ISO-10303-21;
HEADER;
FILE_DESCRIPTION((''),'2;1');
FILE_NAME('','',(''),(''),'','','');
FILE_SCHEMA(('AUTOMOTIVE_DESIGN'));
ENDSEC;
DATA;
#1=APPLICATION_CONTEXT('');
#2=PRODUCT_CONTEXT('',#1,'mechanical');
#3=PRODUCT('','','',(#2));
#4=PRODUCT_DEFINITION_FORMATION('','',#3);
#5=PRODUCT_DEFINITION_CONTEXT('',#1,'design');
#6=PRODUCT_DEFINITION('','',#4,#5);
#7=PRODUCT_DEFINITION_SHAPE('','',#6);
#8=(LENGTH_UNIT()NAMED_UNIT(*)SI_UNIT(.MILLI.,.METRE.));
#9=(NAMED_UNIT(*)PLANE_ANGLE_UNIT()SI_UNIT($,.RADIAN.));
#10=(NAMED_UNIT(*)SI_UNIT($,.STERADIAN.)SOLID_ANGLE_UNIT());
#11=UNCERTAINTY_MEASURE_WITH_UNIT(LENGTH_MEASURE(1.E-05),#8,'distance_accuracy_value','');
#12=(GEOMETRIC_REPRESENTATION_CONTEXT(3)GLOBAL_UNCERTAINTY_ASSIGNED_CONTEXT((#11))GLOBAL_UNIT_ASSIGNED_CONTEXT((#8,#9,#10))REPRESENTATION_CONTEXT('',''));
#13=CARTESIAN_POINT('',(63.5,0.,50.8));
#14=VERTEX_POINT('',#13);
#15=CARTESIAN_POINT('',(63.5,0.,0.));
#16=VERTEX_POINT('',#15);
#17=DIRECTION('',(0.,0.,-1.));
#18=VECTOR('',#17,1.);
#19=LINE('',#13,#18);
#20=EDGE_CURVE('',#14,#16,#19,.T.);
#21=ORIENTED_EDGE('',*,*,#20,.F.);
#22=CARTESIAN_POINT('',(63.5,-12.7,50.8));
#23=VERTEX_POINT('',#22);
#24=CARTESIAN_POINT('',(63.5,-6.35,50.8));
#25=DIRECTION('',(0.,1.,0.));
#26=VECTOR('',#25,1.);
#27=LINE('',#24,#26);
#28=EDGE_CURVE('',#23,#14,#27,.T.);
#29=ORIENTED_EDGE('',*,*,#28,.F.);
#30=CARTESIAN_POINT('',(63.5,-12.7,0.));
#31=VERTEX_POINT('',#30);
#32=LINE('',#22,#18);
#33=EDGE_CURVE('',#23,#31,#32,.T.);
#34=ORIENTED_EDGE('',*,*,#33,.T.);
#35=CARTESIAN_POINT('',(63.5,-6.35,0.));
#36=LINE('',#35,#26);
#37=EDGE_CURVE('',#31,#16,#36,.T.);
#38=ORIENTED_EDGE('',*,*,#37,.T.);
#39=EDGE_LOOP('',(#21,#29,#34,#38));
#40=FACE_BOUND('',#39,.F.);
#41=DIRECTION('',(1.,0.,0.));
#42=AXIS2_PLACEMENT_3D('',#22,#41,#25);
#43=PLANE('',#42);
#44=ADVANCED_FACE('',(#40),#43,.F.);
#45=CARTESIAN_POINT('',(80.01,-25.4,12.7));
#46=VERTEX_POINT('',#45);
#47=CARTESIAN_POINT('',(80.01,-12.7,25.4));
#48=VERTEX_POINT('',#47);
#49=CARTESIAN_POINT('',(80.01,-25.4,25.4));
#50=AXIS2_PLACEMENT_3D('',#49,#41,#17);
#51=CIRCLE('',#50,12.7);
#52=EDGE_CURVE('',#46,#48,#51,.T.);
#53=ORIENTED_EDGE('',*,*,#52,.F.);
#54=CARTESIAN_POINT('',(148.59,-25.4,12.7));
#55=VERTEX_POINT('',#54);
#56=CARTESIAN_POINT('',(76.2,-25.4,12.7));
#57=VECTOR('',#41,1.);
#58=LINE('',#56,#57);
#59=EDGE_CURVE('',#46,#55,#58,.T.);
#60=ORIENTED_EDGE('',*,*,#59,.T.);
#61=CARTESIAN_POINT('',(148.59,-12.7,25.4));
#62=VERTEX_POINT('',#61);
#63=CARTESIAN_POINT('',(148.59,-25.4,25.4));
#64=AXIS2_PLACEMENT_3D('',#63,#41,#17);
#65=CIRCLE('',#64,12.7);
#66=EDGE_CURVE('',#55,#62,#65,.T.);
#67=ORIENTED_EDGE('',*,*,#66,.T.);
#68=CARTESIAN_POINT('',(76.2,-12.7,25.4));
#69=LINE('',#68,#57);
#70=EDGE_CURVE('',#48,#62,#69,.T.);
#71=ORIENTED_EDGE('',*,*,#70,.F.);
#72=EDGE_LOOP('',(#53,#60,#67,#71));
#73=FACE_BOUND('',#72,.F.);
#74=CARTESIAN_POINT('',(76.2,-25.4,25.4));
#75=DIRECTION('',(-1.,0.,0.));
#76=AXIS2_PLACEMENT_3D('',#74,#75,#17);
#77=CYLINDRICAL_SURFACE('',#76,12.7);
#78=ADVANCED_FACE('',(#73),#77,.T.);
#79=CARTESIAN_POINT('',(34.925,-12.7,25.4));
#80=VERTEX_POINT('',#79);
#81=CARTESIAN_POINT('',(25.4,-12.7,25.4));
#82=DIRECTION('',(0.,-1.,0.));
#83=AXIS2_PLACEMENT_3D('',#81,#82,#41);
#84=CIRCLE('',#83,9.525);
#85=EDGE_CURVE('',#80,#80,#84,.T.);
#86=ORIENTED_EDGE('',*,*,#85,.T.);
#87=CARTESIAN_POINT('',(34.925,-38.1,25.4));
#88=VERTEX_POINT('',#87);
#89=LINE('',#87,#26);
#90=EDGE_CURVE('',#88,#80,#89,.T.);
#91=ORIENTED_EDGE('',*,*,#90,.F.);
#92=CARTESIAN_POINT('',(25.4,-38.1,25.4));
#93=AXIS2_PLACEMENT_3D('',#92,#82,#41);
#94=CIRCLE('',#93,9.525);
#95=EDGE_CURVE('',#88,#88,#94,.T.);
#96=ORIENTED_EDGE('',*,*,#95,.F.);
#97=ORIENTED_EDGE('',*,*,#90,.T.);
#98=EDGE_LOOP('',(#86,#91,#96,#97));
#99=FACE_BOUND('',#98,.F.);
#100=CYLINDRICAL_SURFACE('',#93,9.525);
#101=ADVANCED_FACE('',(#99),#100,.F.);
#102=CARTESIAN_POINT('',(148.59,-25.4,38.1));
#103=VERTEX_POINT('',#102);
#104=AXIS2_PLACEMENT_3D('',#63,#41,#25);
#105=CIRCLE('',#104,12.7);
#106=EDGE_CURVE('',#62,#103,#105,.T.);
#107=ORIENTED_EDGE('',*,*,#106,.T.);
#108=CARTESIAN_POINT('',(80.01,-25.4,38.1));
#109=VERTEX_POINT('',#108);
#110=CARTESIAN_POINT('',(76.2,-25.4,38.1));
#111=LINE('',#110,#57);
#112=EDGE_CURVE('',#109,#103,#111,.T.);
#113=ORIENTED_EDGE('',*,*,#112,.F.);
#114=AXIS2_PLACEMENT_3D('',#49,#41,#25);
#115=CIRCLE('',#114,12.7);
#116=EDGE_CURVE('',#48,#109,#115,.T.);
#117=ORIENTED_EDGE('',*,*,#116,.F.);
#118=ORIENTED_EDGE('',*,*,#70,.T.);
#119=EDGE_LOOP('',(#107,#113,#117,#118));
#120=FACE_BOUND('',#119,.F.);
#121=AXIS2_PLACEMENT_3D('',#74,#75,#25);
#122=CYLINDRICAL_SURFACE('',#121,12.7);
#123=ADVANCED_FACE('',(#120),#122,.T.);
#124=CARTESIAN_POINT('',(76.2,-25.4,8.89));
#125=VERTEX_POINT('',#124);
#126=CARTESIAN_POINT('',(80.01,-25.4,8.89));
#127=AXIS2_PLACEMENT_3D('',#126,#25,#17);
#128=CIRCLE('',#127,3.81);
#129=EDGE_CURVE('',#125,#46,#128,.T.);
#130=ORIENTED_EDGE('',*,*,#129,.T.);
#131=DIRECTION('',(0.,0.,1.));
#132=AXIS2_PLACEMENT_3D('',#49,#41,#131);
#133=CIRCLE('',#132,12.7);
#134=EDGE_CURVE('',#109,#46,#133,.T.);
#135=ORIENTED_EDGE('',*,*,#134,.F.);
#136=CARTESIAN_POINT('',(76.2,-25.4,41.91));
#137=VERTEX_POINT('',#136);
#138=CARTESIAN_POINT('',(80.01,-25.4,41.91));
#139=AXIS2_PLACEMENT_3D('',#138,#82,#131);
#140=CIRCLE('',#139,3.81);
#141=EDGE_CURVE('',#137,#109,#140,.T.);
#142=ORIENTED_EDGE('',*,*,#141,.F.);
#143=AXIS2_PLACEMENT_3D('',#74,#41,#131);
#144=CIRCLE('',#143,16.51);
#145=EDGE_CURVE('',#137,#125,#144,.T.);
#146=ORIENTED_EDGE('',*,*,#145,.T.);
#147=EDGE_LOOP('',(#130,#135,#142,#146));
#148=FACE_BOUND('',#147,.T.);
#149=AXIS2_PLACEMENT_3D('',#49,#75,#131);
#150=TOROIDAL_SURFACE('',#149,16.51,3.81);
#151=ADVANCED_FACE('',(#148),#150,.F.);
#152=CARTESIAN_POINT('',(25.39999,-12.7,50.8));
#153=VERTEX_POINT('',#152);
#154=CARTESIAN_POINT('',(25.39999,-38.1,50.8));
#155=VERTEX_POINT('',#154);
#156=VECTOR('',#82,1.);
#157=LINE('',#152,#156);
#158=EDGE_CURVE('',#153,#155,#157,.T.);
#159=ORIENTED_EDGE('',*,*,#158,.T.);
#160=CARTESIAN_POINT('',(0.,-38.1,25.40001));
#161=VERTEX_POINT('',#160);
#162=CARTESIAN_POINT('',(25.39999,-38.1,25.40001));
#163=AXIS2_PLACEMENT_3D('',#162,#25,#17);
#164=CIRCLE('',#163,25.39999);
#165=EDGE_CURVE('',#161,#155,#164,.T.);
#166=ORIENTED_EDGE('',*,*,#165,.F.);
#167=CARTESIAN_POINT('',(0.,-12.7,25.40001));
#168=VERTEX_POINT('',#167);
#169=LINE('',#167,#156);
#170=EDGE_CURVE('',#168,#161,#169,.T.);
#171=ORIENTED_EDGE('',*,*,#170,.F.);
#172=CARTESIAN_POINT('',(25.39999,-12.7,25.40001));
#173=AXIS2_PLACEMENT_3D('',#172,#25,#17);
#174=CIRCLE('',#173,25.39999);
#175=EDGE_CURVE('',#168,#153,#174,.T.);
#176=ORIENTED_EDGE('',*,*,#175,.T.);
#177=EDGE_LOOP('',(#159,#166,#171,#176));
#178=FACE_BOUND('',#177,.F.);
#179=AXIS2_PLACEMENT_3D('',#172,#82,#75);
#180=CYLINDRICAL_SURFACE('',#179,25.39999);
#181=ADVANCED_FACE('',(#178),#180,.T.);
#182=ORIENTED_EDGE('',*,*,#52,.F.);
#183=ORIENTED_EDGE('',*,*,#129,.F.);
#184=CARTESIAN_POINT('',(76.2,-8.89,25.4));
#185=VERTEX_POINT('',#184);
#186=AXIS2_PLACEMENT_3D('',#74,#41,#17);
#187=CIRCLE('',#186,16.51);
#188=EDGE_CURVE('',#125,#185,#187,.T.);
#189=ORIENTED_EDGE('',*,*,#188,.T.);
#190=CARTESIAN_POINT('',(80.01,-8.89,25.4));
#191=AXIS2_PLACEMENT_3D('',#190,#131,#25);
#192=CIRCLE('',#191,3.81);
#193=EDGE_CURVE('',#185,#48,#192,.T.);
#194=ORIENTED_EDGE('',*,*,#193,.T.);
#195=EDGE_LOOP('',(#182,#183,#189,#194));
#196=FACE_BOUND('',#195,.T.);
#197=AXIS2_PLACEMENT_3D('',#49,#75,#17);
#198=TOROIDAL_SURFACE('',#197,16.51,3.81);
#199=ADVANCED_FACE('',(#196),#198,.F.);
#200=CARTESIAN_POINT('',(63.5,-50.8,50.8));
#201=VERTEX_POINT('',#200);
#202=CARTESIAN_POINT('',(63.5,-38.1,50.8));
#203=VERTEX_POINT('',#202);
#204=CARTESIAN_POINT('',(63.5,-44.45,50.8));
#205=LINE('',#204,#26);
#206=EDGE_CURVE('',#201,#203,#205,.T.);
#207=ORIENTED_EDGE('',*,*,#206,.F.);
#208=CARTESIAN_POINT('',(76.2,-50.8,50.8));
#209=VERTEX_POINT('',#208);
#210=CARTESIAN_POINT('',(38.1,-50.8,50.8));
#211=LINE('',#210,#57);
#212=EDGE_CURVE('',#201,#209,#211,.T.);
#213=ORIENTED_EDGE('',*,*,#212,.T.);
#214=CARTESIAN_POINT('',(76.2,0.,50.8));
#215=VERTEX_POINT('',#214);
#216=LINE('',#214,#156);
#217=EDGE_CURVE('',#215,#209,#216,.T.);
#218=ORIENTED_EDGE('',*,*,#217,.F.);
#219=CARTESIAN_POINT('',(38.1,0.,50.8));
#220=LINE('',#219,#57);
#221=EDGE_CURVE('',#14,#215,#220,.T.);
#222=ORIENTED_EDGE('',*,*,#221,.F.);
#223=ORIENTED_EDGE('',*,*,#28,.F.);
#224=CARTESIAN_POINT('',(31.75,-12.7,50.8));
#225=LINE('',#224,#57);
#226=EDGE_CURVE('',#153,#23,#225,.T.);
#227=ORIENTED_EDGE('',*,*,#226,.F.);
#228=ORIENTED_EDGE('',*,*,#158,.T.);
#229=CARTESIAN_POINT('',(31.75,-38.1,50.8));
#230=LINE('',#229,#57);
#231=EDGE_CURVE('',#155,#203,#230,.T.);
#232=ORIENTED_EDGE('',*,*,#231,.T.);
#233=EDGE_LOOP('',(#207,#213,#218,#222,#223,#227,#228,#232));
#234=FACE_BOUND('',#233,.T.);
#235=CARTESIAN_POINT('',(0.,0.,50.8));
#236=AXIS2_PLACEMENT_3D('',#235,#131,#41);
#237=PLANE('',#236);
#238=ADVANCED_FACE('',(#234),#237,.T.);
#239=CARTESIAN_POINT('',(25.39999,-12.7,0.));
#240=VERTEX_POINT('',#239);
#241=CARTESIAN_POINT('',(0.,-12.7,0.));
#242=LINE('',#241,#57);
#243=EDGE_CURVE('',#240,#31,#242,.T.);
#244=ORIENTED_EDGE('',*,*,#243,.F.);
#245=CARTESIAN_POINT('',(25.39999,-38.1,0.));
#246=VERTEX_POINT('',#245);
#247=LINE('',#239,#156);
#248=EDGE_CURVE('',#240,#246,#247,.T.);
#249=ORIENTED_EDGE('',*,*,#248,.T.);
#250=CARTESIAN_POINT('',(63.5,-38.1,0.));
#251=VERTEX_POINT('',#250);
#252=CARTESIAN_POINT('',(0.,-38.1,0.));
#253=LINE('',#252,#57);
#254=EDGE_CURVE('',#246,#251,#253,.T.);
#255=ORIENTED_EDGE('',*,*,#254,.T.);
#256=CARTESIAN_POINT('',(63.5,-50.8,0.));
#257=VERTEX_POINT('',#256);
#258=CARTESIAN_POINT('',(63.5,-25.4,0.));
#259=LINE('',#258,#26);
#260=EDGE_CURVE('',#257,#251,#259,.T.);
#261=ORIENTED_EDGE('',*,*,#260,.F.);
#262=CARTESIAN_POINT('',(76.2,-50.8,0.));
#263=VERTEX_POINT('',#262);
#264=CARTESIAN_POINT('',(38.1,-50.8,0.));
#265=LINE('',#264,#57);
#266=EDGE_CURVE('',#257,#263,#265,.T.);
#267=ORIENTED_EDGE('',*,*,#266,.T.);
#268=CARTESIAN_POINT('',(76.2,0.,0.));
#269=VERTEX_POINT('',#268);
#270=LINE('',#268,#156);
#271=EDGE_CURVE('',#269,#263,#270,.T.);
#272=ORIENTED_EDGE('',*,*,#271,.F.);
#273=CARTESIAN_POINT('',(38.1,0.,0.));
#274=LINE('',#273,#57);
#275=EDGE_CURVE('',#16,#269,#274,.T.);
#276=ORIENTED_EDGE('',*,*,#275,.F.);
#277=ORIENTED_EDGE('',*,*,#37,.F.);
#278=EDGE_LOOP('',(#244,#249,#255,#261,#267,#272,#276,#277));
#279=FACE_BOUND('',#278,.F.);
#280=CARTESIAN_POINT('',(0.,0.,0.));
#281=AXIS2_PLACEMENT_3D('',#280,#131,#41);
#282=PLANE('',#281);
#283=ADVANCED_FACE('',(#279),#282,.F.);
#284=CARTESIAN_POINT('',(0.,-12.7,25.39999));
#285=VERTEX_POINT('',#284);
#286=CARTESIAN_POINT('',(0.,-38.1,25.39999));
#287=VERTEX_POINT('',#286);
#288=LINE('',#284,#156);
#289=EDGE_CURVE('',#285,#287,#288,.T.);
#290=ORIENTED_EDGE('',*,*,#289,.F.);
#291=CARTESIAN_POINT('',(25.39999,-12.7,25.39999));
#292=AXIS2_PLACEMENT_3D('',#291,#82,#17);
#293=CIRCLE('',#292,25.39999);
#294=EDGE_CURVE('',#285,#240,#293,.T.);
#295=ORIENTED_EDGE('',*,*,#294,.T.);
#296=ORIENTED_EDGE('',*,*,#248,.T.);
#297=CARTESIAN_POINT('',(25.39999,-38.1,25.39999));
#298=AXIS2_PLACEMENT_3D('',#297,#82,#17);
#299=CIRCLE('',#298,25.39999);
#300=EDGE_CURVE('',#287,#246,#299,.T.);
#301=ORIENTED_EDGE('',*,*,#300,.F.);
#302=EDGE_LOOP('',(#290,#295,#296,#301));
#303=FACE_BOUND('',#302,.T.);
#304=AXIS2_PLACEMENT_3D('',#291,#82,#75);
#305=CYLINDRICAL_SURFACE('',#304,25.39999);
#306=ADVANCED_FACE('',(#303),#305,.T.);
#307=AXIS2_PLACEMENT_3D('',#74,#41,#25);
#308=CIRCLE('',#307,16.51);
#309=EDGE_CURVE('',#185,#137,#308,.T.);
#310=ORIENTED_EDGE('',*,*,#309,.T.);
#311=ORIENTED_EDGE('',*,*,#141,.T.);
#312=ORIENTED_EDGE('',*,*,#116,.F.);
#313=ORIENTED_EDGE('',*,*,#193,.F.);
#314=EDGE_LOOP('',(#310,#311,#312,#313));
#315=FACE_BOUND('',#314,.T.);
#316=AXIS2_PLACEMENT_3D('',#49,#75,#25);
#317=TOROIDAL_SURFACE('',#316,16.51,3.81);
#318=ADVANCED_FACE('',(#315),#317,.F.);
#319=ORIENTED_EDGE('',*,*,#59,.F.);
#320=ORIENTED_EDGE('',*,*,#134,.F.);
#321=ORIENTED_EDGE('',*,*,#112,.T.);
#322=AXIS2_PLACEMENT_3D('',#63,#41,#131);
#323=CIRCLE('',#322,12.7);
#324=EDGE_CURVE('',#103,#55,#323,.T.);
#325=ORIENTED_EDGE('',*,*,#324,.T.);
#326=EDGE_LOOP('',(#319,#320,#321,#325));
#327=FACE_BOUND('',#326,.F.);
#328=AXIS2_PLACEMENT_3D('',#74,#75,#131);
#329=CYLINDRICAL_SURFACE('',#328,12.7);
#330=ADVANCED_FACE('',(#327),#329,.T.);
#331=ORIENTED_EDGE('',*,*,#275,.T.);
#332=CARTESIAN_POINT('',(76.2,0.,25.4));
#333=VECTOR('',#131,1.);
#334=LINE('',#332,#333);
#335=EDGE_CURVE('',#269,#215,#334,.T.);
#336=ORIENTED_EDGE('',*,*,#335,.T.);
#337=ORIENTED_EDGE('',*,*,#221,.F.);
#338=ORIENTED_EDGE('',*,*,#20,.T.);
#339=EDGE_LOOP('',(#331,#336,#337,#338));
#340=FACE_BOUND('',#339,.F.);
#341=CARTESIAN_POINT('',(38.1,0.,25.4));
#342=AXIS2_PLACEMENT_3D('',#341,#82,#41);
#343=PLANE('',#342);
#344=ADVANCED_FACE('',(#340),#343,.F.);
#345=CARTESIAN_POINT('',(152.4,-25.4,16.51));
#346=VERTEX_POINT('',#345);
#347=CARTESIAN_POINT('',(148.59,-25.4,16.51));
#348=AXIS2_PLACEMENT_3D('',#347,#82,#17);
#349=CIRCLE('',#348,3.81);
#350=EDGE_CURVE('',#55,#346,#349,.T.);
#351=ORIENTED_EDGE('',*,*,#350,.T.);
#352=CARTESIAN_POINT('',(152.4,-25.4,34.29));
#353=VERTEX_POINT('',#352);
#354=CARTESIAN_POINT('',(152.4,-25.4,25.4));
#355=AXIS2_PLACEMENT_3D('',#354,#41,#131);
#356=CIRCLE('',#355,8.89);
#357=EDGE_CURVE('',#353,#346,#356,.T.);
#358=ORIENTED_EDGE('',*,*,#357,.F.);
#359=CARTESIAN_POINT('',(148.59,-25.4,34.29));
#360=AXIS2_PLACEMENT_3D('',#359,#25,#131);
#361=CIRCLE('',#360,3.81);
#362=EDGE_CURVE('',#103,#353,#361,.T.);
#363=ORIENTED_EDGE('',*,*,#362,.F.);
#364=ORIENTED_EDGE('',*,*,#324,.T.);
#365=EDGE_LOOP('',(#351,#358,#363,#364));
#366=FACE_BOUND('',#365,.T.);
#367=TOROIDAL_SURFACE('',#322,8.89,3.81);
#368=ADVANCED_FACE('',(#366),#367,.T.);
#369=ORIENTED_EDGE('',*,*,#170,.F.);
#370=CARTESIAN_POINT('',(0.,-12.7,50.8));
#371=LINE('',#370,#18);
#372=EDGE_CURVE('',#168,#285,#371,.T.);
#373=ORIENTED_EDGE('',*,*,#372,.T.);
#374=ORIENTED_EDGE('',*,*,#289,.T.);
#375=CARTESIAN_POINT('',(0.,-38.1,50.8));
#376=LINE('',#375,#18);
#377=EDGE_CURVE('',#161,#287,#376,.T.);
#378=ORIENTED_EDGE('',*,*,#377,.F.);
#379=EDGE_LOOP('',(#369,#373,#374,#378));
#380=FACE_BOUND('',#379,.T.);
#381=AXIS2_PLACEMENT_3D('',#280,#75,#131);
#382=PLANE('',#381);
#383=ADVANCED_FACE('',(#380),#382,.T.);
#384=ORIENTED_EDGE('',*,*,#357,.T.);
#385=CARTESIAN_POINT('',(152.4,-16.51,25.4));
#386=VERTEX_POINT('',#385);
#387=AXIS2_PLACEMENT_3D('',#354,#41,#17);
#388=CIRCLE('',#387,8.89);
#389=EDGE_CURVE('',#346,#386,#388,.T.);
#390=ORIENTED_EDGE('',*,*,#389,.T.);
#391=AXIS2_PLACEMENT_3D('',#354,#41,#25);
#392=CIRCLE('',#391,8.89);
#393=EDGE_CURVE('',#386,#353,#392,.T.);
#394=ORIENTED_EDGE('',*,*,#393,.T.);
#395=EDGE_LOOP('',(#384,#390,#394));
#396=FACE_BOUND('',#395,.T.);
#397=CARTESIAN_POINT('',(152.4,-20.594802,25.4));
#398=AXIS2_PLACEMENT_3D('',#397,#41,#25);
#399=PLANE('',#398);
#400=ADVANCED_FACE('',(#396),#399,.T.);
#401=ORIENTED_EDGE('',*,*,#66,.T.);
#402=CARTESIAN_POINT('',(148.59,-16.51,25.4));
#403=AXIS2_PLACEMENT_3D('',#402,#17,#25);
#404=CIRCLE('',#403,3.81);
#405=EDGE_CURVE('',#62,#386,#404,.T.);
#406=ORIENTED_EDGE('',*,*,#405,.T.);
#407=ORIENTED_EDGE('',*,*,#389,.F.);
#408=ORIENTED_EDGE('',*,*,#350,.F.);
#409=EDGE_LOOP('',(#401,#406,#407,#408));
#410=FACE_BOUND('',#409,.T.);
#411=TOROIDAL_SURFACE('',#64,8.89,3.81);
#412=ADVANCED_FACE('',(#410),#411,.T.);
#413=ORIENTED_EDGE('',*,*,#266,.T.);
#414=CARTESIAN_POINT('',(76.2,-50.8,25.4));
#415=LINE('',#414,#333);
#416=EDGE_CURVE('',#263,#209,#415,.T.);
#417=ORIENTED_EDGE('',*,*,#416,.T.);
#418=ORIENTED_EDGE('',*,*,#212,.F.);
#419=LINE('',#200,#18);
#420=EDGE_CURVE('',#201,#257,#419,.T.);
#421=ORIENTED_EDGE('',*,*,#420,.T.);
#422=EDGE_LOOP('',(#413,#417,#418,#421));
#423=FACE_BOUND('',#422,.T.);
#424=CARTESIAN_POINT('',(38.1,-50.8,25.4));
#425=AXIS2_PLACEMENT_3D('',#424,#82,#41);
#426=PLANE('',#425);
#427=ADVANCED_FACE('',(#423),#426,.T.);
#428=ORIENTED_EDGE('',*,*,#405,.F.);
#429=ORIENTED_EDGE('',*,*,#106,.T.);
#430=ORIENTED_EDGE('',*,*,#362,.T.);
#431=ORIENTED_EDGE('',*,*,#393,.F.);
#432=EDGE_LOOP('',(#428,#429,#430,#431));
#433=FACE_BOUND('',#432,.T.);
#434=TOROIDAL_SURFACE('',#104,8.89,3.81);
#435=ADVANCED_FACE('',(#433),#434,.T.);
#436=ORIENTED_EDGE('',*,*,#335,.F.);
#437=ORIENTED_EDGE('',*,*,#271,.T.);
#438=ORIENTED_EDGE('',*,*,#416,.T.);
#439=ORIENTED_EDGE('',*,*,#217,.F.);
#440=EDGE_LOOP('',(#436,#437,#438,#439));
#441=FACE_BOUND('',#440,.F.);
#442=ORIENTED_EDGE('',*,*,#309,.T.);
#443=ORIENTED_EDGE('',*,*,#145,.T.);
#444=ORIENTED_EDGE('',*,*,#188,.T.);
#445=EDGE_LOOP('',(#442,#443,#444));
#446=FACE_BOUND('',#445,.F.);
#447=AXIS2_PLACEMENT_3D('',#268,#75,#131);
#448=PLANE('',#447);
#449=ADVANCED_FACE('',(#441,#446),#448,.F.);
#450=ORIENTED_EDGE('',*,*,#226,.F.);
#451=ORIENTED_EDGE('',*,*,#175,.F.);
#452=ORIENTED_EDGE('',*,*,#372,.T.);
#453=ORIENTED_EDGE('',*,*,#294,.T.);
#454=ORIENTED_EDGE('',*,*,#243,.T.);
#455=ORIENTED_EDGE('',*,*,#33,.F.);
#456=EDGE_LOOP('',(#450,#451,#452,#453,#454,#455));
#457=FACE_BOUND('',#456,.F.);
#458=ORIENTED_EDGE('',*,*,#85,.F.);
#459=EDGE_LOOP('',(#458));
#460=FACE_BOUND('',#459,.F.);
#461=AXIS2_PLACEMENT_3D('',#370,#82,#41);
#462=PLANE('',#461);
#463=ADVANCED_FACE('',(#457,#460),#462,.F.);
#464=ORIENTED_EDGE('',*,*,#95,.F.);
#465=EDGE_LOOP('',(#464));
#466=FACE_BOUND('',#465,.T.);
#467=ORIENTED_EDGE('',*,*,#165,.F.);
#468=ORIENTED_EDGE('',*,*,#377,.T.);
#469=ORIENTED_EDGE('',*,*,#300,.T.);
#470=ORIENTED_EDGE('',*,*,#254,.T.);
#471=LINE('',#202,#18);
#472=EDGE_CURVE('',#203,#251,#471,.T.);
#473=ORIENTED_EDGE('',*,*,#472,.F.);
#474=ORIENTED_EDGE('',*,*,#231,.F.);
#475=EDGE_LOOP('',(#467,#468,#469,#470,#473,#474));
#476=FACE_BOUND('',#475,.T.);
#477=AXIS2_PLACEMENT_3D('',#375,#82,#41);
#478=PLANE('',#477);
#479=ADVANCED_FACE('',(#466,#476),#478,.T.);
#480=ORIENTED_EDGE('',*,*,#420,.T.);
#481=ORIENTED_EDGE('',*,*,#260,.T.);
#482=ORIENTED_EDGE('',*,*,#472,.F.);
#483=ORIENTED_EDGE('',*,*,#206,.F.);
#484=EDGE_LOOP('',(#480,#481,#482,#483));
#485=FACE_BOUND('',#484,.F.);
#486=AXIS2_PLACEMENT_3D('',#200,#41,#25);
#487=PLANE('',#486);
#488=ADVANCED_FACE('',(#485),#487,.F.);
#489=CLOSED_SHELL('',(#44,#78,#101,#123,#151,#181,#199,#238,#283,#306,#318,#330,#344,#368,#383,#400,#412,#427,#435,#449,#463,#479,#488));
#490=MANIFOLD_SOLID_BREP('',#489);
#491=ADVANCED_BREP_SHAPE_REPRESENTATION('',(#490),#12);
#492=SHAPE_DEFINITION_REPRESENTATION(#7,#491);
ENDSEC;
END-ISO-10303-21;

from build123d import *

# Parameters (mm, degrees)
F0_W     = 76.2
F0_H     = 50.8
F1_DEPTH = 50.8
F2_W     = 63.5
F2_H     = 12.7
F3_DEPTH = 177.8
F5_DEPTH = 127
F6_R     = 25.39999
F8_DEPTH = 76.2
F9_R     = 3.81


# Not quite as in the source:
# - a fillet or chamfer is up to 0.001 mm smaller than in the source, because OpenCascade refuses the exact size


with BuildPart() as f1:
    # F0 (on Front) → F1 (new body)
    with BuildSketch(Plane.XZ):
        with Locations((38.1, 25.4)):
            Rectangle(F0_W, F0_H)
    extrude(amount=F1_DEPTH)

    # F2 (on face) → F3 (cut)
    with BuildSketch(Plane.XY.offset(50.8)):
        with Locations((31.75, -6.35)):
            Rectangle(F2_W, F2_H)
        with Locations((31.75, -44.45)):
            Rectangle(F2_W, F2_H)
    extrude(amount=-F3_DEPTH, mode=Mode.SUBTRACT)

    # F4 (on face) → F5 (cut)
    with BuildSketch(Plane.XZ.offset(38.1)):
        with BuildLine():
            ThreePointArc((15.875, 25.4), (25.4, 15.875), (34.925, 25.4))
            ThreePointArc((34.925, 25.4), (25.4, 34.925), (15.875, 25.4))
        make_face()
    extrude(amount=-F5_DEPTH, mode=Mode.SUBTRACT)

    # F6 (radius 25.4 in the source; OpenCascade refuses exactly that, so slightly less here)
    f6_edges = [f1.edges().sort_by_distance(p)[0] for p in [
        (0, -25.4, 0),
        (0, -25.4, 50.8),
    ]]
    fillet(f6_edges, radius=F6_R)

    # F7 (on face) → F8 (join)
    with BuildSketch(Plane.YZ.offset(76.2)):
        with BuildLine():
            ThreePointArc((-12.7, 25.4), (-16.4197438789, 34.3802561211), (-25.4, 38.1))
            Line((-25.4, 38.1), (-25.4, 12.7))
            ThreePointArc((-25.4, 12.7), (-16.4197438789, 16.4197438789), (-12.7, 25.4))
        make_face()
        with BuildLine():
            Line((-25.4, 12.7), (-25.4, 38.1))
            ThreePointArc((-25.4, 38.1), (-38.1, 25.4), (-25.4, 12.7))
        make_face()
    extrude(amount=F8_DEPTH)

    # F9
    f9_edges = [f1.edges().sort_by_distance(p)[0] for p in [
        (152.4, -38.1, 25.4),
        (76.2, -38.1, 25.4),
    ]]
    fillet(f9_edges, radius=F9_R)


solid = f1.part
